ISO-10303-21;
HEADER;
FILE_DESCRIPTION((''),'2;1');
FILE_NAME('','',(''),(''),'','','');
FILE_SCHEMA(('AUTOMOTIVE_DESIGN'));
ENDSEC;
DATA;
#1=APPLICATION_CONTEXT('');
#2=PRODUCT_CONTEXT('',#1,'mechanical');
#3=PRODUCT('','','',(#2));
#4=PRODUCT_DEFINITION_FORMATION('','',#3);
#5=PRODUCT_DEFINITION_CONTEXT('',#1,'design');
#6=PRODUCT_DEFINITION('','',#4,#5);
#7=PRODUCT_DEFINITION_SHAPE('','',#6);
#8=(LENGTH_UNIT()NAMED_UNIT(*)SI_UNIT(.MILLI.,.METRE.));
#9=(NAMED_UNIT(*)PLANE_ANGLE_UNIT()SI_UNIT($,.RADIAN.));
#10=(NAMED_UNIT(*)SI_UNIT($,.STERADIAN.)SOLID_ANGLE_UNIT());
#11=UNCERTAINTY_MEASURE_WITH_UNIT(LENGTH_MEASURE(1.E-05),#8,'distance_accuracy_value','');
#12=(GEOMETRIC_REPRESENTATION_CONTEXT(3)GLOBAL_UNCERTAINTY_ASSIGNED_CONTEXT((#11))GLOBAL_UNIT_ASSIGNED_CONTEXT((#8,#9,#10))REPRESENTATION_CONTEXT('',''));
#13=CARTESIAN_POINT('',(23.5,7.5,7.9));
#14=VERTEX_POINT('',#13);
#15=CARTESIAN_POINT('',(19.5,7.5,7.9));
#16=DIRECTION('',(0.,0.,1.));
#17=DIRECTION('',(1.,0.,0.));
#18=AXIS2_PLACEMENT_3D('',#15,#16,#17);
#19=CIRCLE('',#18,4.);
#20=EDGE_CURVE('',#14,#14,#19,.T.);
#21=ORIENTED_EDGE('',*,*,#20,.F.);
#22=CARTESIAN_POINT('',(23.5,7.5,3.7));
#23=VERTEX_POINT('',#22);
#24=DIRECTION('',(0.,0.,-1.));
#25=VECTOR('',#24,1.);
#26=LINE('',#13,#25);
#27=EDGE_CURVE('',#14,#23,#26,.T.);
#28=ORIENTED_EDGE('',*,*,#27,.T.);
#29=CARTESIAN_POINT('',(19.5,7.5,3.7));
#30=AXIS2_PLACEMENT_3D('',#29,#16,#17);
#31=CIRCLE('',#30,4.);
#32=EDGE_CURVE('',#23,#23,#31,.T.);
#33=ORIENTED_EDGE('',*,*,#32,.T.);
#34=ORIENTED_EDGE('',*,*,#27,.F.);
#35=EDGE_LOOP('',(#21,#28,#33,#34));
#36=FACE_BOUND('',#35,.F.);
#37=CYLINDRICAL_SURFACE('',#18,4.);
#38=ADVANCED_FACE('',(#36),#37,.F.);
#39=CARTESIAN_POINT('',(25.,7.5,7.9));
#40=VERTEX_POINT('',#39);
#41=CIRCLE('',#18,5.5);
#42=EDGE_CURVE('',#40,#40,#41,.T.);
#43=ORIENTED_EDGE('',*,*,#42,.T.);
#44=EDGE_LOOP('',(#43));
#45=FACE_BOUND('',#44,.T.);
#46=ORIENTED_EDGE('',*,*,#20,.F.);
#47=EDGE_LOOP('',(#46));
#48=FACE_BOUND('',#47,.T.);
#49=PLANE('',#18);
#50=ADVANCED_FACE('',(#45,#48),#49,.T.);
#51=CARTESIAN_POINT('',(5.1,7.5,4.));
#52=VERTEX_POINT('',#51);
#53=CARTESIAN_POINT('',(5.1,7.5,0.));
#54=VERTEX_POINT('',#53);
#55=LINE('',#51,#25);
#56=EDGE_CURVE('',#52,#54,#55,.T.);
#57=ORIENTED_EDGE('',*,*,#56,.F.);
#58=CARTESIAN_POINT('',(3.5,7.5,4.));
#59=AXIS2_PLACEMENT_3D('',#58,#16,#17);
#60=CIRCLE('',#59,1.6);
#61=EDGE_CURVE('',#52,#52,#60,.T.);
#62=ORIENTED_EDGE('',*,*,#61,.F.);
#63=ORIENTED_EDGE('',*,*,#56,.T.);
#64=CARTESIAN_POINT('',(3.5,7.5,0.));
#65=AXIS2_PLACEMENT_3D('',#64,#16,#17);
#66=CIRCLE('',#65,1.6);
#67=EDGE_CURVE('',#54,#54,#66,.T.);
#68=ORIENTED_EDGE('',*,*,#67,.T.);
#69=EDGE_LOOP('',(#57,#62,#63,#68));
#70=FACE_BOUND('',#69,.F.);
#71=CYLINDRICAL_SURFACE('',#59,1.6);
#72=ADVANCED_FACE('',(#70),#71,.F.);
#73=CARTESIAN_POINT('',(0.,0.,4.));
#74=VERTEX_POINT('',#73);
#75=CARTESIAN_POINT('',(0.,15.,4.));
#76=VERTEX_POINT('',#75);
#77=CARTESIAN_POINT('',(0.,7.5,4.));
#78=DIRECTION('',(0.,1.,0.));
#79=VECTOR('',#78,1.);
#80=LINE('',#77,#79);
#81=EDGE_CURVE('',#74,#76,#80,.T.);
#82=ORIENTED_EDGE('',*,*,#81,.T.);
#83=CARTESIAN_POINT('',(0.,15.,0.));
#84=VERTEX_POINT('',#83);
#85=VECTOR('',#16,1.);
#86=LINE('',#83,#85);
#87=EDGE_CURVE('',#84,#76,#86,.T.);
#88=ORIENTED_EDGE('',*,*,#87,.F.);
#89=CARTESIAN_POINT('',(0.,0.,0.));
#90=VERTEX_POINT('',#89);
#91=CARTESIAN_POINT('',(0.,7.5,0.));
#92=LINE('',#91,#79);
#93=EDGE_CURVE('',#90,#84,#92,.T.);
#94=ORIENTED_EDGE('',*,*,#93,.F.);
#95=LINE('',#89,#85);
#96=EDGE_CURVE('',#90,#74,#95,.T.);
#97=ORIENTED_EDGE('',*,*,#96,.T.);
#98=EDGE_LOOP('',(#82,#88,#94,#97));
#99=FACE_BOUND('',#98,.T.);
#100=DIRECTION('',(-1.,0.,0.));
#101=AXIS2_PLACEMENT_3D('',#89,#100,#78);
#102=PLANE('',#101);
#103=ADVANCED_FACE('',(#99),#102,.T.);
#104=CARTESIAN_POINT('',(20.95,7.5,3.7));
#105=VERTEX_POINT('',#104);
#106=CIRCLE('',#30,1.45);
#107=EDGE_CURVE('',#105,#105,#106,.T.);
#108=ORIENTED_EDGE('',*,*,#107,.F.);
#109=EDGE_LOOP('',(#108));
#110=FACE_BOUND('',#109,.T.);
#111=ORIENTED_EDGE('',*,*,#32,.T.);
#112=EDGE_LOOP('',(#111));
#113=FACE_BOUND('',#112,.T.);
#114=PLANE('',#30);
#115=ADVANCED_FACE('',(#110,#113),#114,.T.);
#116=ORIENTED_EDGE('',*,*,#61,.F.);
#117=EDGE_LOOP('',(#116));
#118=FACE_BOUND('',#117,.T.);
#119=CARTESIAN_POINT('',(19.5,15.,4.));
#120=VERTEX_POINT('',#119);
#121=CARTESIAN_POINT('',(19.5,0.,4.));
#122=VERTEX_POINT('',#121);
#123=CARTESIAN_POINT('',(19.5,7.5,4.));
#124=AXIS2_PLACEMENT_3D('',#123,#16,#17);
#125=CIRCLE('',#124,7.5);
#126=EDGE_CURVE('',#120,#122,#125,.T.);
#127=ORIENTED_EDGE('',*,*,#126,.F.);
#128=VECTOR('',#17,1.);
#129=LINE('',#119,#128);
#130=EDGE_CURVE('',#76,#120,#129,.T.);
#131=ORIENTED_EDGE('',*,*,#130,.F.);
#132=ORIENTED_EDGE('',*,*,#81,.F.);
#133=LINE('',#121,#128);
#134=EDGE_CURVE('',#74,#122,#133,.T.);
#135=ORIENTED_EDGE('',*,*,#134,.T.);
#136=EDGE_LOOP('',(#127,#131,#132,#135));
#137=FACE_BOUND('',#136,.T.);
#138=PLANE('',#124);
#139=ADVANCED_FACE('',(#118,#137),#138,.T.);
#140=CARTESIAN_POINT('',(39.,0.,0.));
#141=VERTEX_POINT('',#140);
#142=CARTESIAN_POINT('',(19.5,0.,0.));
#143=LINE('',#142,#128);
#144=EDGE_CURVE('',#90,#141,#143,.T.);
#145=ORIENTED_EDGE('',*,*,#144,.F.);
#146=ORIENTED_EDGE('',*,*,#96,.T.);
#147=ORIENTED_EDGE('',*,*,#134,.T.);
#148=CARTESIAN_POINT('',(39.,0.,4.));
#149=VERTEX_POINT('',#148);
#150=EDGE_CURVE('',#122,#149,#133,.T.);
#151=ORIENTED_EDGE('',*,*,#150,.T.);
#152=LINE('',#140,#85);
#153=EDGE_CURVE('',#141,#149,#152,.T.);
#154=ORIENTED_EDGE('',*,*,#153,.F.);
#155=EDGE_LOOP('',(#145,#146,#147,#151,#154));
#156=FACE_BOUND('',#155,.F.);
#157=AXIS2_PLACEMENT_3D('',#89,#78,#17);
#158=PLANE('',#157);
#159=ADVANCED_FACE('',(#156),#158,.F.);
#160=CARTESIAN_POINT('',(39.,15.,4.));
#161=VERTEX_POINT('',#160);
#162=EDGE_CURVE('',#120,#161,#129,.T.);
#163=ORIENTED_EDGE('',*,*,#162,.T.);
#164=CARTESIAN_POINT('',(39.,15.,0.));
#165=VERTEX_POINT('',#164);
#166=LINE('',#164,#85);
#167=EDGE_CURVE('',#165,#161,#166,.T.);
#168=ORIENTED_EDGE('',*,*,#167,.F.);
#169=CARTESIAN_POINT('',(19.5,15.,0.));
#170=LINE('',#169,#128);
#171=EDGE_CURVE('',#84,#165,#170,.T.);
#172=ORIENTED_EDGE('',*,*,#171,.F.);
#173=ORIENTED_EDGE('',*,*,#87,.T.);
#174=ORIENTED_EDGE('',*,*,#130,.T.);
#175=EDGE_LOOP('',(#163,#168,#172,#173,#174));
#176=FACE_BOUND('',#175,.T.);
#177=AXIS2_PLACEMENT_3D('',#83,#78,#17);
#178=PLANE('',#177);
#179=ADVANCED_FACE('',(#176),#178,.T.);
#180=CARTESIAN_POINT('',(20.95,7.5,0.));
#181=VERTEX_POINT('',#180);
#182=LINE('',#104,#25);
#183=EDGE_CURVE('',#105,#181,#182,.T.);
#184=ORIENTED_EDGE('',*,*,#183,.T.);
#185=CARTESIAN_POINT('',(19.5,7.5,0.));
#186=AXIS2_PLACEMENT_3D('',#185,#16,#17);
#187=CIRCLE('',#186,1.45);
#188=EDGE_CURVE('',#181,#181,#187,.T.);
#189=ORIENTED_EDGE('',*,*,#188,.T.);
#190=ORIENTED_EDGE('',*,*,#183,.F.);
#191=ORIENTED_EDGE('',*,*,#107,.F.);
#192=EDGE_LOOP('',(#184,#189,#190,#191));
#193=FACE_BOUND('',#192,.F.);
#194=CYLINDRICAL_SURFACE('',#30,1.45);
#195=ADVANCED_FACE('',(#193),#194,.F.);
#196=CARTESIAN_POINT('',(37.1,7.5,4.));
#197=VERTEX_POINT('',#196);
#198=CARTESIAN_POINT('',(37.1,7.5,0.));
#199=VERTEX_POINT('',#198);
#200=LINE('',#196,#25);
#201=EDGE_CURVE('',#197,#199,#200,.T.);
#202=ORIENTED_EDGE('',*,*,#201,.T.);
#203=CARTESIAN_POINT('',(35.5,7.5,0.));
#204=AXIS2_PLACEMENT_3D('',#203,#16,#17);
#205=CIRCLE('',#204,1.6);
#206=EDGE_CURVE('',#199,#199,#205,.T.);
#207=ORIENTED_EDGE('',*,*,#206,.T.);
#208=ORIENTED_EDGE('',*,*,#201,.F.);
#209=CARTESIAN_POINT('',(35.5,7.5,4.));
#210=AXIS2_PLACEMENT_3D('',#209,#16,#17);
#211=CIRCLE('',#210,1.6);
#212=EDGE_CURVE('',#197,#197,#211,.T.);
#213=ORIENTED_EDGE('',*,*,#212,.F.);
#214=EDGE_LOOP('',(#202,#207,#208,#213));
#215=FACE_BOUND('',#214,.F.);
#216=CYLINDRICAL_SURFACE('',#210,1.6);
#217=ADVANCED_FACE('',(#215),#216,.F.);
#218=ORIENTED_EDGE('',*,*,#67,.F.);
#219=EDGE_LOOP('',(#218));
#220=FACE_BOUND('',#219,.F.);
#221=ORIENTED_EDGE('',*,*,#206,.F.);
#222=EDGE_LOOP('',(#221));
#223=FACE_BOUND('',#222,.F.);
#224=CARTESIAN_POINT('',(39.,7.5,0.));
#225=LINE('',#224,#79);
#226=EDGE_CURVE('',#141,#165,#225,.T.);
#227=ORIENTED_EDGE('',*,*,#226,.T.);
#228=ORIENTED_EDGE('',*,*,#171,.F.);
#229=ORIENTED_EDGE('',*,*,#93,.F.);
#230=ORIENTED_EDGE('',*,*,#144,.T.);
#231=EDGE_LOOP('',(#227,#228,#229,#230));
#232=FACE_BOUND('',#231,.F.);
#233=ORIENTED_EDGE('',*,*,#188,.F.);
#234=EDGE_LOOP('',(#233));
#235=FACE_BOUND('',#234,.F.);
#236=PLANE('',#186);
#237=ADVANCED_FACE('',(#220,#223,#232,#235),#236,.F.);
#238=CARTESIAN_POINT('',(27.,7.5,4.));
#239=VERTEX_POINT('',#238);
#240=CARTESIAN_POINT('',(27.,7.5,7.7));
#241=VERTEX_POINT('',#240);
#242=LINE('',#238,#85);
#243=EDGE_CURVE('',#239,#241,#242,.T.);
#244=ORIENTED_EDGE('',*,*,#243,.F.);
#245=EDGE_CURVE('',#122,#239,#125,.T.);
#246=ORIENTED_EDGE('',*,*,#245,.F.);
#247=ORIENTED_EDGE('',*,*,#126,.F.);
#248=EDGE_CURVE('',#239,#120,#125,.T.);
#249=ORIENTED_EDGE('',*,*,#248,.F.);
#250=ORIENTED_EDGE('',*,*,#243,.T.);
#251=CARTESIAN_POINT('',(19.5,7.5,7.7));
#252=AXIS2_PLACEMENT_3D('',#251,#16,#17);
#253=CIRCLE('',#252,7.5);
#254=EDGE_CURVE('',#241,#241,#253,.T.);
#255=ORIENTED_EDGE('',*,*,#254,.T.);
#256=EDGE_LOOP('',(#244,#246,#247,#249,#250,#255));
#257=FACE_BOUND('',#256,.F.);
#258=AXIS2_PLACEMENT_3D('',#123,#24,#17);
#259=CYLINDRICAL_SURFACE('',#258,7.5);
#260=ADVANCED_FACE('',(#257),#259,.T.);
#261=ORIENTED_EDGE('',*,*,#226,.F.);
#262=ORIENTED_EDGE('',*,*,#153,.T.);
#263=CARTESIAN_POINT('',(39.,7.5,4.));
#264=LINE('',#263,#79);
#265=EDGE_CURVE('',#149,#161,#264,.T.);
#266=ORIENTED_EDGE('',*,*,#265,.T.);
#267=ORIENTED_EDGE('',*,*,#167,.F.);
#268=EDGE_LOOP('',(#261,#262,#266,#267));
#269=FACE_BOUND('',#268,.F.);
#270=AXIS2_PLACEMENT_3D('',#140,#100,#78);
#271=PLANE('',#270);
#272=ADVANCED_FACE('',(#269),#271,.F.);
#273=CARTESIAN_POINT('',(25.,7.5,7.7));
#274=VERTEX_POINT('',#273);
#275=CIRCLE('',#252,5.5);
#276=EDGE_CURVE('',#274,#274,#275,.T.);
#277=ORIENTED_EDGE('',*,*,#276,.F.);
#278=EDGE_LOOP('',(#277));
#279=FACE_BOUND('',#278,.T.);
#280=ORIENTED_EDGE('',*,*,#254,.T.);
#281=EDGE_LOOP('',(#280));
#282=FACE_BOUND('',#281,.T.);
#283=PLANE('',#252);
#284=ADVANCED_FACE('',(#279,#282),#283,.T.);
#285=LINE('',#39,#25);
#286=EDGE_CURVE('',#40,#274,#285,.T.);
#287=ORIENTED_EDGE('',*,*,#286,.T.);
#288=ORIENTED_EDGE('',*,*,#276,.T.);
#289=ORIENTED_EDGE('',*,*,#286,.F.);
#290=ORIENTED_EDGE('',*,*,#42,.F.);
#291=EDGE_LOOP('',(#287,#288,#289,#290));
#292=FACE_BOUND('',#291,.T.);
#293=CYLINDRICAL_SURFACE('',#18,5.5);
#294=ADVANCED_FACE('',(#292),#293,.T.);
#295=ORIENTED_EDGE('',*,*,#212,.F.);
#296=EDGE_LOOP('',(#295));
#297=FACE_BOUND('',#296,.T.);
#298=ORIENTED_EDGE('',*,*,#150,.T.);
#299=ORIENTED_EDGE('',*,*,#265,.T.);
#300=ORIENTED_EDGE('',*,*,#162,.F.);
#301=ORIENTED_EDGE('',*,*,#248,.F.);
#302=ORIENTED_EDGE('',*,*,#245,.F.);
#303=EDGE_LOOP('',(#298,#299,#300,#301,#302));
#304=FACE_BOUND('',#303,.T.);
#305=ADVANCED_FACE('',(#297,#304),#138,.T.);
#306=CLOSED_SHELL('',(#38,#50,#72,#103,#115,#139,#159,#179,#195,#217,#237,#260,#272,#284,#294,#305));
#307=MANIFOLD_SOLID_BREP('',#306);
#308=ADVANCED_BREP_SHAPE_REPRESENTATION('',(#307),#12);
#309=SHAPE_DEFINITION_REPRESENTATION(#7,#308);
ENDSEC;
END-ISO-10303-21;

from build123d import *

# Parameters (mm, degrees)
F0_W      = 39
F0_H      = 15
F1_DEPTH  = 4
F2_R      = 7.5
F3_DEPTH  = 3.9
F4_R      = 4
F5_DEPTH  = 4.2
F6_R      = 1.6
F7_DEPTH  = 25
F8_R      = 1.45
F9_DEPTH  = 25
F10_R     = 7.5
F10_R_2   = 5.5
F11_DEPTH = 0.2


# Not quite as in the source:
# - a feature names something its author has since deleted; it is built from what else it names


with BuildPart() as f1:
    # F0 (on Top) → F1 (new body)
    with BuildSketch(Plane.XY):
        with Locations((19.5, 7.5)):
            Rectangle(F0_W, F0_H)
    extrude(amount=F1_DEPTH)

    # F2 (on face) → F3 (join)
    with BuildSketch(Plane.XY.offset(4)):
        with Locations((19.5, 7.5)):
            Circle(F2_R)
    extrude(amount=F3_DEPTH)

    # F4 (on face) → F5 (cut)
    with BuildSketch(Plane.XY.offset(7.9)):
        with Locations((19.5, 7.5)):
            Circle(F4_R)
    extrude(amount=-F5_DEPTH, mode=Mode.SUBTRACT)

    # F6 (on face) → F7 (cut)
    with BuildSketch(Plane.XY.offset(4)):
        with Locations((35.5, 7.5)):
            Circle(F6_R)
        with Locations((3.5, 7.5)):
            Circle(F6_R)
    extrude(amount=-F7_DEPTH, mode=Mode.SUBTRACT)

    # F8 (on face) → F9 (cut)
    with BuildSketch(Plane.XY.offset(3.7)):
        with Locations((19.5, 7.5)):
            Circle(F8_R)
    extrude(amount=-F9_DEPTH, mode=Mode.SUBTRACT)

    # F10 (on face) → F11 (cut)
    with BuildSketch(Plane.XY.offset(7.9)):
        with Locations((19.5, 7.5)):
            Circle(F10_R)
        with Locations((19.5, 7.5)):
            Circle(F10_R_2, mode=Mode.SUBTRACT)
    extrude(amount=-F11_DEPTH, mode=Mode.SUBTRACT)


solid = f1.part
